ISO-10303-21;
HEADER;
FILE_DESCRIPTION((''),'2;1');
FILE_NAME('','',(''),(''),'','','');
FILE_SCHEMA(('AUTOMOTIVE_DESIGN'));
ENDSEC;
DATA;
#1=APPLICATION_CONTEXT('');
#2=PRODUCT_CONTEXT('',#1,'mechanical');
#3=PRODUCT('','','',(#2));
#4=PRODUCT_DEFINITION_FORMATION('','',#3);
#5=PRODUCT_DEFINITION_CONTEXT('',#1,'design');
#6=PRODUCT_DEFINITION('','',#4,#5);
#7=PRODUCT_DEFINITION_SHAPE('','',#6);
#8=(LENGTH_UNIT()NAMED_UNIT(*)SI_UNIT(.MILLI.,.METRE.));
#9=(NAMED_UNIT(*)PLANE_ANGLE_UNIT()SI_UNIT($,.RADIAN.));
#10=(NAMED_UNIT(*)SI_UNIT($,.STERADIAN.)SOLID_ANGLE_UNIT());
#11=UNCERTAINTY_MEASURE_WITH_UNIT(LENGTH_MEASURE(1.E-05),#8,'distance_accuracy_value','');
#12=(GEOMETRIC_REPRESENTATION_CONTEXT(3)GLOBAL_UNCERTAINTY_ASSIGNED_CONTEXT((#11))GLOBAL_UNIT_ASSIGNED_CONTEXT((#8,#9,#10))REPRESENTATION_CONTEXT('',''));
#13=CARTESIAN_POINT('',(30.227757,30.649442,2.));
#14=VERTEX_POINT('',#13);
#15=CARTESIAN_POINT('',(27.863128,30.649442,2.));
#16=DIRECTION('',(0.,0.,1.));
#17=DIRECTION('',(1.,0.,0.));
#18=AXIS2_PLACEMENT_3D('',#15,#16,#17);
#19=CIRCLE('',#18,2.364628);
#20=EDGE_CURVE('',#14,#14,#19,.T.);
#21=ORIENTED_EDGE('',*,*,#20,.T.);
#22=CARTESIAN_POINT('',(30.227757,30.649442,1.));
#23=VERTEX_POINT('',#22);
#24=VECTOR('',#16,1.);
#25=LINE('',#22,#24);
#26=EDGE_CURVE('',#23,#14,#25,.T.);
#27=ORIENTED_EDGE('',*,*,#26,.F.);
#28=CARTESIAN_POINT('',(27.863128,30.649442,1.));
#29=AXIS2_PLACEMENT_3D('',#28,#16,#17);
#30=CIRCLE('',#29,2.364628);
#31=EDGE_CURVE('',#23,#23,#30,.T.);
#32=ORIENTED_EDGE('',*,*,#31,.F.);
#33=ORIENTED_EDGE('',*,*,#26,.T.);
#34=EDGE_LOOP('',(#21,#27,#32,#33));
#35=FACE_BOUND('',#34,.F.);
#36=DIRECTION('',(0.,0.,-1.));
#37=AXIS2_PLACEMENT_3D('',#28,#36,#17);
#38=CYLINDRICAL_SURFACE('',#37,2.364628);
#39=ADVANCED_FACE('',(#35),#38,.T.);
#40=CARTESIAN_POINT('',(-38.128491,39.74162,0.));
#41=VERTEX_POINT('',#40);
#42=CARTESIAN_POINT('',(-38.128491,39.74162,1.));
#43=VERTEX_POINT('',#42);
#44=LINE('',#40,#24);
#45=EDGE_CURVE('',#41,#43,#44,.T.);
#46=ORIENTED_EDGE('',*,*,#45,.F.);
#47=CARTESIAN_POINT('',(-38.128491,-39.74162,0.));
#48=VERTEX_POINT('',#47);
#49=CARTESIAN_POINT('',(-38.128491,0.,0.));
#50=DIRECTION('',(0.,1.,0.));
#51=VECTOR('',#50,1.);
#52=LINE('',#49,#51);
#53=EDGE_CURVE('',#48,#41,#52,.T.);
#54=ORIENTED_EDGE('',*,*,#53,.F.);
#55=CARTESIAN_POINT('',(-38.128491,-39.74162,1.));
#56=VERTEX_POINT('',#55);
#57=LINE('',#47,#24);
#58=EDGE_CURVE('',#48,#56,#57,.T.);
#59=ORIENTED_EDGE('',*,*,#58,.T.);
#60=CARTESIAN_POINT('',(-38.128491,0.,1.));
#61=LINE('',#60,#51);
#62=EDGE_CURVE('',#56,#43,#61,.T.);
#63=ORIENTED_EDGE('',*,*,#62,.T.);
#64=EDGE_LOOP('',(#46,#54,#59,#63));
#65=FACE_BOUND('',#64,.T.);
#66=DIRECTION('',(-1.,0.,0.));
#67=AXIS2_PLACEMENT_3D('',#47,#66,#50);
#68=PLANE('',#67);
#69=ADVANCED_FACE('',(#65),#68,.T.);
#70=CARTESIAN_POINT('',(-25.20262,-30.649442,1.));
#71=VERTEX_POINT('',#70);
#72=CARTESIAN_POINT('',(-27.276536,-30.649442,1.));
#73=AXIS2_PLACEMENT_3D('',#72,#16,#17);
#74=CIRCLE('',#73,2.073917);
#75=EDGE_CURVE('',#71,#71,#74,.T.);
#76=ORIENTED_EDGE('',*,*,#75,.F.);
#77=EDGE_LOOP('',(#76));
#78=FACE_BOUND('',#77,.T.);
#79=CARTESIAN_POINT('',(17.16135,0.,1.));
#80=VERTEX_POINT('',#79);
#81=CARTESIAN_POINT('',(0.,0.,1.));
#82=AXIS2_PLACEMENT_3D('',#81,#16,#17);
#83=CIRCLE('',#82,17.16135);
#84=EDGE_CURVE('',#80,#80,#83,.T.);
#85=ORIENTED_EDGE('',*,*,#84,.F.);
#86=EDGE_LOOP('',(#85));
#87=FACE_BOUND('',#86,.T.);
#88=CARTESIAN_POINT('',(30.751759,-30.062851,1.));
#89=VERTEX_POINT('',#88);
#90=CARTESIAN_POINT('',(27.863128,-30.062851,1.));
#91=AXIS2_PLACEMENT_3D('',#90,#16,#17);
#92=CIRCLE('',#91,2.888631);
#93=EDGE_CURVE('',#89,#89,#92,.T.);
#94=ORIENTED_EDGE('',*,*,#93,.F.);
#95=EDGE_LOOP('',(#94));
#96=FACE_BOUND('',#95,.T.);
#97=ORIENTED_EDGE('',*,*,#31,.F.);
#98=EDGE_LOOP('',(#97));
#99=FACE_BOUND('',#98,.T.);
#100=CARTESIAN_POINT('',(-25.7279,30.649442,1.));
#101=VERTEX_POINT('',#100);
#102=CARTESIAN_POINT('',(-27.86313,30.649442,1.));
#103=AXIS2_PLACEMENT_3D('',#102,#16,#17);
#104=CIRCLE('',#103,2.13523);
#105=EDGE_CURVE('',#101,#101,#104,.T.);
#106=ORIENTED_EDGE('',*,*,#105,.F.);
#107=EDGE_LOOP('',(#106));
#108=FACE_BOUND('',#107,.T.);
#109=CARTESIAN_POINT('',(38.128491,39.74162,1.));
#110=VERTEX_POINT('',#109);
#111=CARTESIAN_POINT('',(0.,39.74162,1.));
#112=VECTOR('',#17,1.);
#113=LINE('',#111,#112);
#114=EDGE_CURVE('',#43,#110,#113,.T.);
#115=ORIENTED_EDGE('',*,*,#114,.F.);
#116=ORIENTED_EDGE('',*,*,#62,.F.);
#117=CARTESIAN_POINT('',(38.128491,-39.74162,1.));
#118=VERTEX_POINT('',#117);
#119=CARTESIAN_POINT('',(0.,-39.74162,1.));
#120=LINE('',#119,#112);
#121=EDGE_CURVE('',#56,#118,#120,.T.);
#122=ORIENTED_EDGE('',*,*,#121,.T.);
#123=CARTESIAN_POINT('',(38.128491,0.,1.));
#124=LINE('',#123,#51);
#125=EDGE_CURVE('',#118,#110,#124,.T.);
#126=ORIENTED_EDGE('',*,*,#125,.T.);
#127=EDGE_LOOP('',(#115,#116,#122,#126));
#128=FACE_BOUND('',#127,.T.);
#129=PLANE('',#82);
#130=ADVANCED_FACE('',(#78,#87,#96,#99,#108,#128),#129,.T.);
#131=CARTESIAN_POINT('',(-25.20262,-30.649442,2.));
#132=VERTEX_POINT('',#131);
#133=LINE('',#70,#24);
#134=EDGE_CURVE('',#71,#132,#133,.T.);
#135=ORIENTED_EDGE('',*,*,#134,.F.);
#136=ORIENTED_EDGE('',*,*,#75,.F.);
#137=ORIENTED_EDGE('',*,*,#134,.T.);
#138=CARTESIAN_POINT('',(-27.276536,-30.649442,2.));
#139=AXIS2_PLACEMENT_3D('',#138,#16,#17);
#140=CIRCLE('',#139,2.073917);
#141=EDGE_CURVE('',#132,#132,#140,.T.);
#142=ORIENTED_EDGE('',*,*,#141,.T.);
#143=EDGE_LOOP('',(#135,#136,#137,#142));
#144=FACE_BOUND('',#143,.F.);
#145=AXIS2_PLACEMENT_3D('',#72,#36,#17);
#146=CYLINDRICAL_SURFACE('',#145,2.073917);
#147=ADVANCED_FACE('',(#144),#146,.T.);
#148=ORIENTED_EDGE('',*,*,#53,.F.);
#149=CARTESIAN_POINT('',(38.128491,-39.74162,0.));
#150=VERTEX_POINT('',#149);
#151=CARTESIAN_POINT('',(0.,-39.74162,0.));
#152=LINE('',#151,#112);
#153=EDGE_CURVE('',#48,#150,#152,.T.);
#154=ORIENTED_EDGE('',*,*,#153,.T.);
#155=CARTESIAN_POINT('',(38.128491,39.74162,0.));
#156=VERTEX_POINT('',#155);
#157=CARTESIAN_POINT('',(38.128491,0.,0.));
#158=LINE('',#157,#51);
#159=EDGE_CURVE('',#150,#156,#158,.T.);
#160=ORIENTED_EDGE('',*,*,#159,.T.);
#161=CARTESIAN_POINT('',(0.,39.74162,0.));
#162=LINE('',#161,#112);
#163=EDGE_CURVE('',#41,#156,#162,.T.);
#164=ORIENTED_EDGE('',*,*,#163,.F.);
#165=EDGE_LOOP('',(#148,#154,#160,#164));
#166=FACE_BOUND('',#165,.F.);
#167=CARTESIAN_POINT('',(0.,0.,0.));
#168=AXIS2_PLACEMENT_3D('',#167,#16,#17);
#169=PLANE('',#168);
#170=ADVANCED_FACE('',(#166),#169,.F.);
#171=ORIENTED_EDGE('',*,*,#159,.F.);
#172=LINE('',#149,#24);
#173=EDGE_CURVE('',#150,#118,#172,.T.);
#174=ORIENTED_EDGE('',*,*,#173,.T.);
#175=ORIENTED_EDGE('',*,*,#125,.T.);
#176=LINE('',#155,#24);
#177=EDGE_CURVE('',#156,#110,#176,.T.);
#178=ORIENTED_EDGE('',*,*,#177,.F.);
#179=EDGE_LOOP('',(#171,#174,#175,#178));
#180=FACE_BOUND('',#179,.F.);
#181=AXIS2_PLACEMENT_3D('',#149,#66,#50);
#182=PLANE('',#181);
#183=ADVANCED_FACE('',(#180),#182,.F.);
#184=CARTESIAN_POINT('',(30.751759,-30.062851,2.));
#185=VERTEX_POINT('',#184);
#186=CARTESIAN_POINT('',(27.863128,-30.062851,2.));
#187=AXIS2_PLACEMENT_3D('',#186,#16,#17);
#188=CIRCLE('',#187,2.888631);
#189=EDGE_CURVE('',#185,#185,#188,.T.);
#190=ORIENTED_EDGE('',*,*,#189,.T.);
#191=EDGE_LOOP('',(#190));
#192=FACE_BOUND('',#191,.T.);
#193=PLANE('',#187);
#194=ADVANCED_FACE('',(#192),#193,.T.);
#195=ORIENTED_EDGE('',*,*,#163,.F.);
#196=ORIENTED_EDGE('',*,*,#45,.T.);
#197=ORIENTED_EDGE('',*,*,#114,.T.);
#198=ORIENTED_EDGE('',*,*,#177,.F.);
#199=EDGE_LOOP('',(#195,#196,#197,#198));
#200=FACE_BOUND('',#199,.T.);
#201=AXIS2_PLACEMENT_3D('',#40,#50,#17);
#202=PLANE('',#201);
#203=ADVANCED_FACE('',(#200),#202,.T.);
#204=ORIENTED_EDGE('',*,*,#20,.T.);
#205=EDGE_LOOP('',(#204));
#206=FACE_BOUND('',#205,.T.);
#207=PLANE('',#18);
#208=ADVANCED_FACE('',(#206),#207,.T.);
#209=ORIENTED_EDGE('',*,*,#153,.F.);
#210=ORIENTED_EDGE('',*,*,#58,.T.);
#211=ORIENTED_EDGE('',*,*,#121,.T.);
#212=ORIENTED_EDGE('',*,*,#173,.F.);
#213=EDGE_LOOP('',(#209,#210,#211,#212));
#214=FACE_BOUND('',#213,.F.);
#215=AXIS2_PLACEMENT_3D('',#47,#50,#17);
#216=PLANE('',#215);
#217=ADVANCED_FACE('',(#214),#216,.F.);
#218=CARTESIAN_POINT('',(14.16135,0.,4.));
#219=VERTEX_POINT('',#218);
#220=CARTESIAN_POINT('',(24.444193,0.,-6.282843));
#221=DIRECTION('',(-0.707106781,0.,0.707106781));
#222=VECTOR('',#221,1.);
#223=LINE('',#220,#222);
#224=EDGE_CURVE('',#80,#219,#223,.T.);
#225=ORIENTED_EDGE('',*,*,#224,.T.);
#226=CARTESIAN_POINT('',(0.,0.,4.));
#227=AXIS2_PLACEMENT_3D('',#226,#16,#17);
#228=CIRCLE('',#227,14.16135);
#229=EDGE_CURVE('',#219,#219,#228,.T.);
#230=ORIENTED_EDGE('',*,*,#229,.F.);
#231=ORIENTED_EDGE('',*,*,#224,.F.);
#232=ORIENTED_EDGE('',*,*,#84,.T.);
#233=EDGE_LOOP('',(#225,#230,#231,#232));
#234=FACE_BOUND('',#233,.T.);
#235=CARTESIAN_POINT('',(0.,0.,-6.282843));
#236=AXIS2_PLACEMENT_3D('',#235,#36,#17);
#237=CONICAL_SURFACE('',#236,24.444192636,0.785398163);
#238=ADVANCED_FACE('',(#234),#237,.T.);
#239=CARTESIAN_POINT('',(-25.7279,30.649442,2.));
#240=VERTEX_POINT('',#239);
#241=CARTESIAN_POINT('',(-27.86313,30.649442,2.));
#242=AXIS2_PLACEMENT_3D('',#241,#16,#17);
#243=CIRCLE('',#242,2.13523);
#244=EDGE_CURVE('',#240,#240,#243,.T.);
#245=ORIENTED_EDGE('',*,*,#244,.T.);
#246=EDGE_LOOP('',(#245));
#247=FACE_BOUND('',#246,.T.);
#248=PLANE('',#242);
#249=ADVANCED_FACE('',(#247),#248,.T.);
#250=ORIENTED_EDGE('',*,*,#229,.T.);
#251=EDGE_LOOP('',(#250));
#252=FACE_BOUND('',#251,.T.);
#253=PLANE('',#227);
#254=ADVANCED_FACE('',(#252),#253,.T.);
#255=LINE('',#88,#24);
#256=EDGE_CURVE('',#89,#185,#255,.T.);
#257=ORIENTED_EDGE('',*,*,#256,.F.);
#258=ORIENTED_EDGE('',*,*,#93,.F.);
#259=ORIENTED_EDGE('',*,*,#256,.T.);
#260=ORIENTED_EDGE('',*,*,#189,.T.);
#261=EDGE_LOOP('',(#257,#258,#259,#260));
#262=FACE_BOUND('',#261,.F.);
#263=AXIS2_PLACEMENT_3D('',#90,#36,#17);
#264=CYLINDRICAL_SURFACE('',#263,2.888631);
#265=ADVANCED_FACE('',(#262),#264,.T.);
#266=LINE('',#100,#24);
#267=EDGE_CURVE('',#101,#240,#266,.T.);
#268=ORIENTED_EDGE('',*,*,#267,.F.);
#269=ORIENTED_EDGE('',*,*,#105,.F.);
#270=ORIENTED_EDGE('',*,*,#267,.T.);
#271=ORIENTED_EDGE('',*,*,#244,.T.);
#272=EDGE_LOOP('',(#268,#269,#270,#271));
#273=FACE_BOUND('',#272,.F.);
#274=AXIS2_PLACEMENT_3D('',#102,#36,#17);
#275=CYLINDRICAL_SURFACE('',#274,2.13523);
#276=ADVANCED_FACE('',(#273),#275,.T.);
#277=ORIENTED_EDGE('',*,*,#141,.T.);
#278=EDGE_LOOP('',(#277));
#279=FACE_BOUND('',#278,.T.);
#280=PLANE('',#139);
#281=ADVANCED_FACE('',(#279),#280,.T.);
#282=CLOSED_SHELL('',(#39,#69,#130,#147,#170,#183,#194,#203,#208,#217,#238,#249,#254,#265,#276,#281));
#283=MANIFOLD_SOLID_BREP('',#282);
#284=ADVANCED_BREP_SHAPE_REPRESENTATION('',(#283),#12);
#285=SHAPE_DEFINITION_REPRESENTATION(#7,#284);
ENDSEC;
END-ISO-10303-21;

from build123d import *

# Parameters (mm, degrees)
F1_R     = 24.1613499239
F2_DEPTH = 4
F0_W     = 76.2569829822
F0_H     = 79.4832408428
F3_DEPTH = 1
F4_R     = 2.0739165502
F5_DEPTH = 1
F6_R     = 2.8886313869
F6_R_2   = 2.3646284302
F6_R_3   = 2.1352299697
F7_DEPTH = 1


# Not quite as in the source:
# - a fillet or chamfer that OpenCascade refuses, or shapes differently, is made with other operations: its cross-section is extruded or revolved along the edge and cut away or added


with BuildPart() as f2:
    # F1 (on face) → F2 (new body)
    with BuildSketch(Plane.XY):
        Circle(F1_R)
    extrude(amount=F2_DEPTH)

    # F0 (on Top) → F3 (join)
    with BuildSketch(Plane.XY):
        Rectangle(F0_W, F0_H)
    extrude(amount=F3_DEPTH)

    # F4 (on face) → F5 (join)
    with BuildSketch(Plane.XY.offset(1)):
        with Locations((-27.2765364498, -30.6494422257)):
            Circle(F4_R)
    extrude(amount=F5_DEPTH)

    # F6 (on face) → F7 (join)
    with BuildSketch(Plane.XY.offset(1)):
        with Locations((27.8631281108, -30.0628505647)):
            Circle(F6_R)
        with Locations((27.8631281108, 30.6494422257)):
            Circle(F6_R_2)
        with Locations((-27.8631299734, 30.6494422257)):
            Circle(F6_R_3)
    extrude(amount=F7_DEPTH)

    # F8: chamfer of 10 on 1 edges, made by hand


with BuildPart() as f8_tool2:
    # F8_s3 → F8_t4 (revolve)
    with BuildSketch(Plane.XZ):
        with BuildLine():
            Line((24.4441926363, -6.2828427125), (13.8785072114, 4.2828427125))
            Line((13.8785072114, 4.2828427125), (13.8785072114, 4.4828427125))
            ThreePointArc((13.8785072114, 4.4828427125), (19.0199285676, 4.2), (24.1613499239, 4.2))
            Line((24.1613499239, 4.2), (24.3613499239, 4))
            ThreePointArc((24.3613499239, 4), (24.3613499239, -1.1414213562), (24.6441926363, -6.2828427125))
            Line((24.6441926363, -6.2828427125), (24.4441926363, -6.2828427125))
        make_face()
    revolve(axis=Axis((0, 0, 4), (0, 0, 1)))

    split(bisect_by=Plane.XY.offset(1), keep=Keep.TOP)


with BuildPart() as f2_1:
    add(f2.part)

    # F8_t1: cut F8_tool2
    add(f8_tool2.part, mode=Mode.SUBTRACT)


solid = f2_1.part
